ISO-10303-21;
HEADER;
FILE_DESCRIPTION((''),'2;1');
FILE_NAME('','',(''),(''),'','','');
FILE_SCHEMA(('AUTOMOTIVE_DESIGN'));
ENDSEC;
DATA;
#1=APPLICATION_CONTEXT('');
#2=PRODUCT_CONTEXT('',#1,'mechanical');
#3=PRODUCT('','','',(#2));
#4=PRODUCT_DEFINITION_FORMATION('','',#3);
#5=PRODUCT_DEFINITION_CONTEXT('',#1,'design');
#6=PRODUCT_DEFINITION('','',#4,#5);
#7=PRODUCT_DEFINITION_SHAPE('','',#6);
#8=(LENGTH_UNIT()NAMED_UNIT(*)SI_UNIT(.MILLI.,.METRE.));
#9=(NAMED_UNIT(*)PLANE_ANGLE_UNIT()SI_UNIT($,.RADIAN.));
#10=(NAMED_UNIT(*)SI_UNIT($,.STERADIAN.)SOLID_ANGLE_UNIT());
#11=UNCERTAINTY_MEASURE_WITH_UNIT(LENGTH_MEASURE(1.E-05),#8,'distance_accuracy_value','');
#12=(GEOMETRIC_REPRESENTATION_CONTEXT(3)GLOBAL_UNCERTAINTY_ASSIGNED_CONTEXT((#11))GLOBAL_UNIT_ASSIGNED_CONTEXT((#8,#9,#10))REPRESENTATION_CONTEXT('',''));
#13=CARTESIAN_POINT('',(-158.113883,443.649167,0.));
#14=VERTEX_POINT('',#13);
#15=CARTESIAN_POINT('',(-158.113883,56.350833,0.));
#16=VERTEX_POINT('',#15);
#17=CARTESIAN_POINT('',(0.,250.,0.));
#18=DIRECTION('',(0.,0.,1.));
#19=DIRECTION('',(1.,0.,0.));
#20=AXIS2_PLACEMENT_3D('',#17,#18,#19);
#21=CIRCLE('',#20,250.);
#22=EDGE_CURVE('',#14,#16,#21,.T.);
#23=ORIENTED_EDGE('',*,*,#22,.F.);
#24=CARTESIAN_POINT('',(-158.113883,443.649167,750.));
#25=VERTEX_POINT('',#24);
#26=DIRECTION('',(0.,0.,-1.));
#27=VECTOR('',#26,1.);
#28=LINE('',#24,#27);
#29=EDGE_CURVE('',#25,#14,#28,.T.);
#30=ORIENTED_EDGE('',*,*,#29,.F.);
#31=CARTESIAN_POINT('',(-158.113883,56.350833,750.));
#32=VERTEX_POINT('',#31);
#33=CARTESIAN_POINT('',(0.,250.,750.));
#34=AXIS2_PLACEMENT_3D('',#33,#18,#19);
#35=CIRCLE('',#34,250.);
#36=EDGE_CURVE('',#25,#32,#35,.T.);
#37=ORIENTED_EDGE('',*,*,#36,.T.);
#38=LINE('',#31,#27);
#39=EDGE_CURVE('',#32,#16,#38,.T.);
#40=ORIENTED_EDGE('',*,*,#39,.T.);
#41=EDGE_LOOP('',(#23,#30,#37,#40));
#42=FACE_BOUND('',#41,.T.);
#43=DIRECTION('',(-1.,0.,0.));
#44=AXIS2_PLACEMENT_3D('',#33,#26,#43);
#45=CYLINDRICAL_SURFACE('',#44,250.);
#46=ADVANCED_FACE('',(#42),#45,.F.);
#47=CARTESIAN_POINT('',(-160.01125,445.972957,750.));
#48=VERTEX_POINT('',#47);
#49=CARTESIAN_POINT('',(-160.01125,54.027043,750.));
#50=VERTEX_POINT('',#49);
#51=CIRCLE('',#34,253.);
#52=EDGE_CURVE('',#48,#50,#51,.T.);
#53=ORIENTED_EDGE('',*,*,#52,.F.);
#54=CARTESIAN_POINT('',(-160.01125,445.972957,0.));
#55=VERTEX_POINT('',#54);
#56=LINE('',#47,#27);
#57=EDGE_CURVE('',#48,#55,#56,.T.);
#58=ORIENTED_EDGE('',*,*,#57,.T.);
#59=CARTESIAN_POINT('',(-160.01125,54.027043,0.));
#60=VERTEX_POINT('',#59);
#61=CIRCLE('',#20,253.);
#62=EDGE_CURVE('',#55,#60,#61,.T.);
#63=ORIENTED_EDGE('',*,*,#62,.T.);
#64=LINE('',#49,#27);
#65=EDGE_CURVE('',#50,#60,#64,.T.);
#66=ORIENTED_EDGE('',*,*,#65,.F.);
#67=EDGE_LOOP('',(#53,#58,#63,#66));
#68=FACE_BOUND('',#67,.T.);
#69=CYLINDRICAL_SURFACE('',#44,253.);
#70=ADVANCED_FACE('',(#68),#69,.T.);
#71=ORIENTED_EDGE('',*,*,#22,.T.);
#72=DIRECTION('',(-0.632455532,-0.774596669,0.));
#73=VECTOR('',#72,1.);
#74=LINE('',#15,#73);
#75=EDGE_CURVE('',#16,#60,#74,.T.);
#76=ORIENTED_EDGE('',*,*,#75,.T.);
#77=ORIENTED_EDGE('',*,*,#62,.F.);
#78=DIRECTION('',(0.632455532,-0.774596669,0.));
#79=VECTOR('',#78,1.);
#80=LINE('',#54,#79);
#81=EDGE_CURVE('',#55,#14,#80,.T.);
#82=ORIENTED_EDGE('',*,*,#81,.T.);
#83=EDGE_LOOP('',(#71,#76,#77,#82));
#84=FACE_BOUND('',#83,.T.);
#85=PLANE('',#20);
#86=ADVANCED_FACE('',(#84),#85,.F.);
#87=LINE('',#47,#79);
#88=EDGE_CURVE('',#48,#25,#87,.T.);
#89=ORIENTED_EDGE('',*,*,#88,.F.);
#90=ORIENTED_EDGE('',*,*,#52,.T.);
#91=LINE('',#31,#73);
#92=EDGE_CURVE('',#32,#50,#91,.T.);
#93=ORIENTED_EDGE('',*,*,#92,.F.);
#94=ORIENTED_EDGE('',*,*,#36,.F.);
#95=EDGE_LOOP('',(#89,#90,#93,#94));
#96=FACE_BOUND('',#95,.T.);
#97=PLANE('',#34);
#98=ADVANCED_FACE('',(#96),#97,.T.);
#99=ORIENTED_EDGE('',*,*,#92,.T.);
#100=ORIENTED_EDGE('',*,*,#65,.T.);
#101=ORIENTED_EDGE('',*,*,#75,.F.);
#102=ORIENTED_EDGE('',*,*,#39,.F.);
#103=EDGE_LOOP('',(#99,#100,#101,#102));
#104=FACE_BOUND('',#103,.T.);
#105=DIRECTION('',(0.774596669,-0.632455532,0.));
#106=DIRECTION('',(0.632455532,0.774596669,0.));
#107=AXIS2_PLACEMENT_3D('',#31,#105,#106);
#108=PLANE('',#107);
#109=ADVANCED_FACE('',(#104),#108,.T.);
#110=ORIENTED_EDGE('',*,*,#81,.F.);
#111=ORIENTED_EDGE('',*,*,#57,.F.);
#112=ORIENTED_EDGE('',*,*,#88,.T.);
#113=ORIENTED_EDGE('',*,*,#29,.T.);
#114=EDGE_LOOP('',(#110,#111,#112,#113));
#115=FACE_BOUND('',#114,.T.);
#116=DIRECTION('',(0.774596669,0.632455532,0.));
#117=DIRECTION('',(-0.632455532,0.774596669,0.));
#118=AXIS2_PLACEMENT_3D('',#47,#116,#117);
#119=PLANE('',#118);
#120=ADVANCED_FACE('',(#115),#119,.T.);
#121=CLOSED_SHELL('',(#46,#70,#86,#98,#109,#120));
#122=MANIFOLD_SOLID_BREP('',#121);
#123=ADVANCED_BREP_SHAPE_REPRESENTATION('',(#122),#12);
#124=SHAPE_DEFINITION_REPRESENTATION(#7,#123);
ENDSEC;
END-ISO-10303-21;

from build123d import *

# Parameters (mm, degrees)
FLANGE_BASE1_DEPTH = 750


# Sheet-metal steps are written as plain solids
with BuildPart() as part:
    # Esboço1 → Flange-base1 (new body)
    with BuildSketch(Plane.XY):
        with BuildLine():
            ThreePointArc((-158.113883008, 443.64916731), (-250, 250), (-158.113883008, 56.35083269))
            Line((-158.113883008, 56.35083269), (-160.011249605, 54.027042682))
            ThreePointArc((-160.011249605, 54.027042682), (-253, 250), (-160.011249605, 445.972957318))
            Line((-160.011249605, 445.972957318), (-158.113883008, 443.64916731))
        make_face()
    extrude(amount=FLANGE_BASE1_DEPTH)


solid = part.part
